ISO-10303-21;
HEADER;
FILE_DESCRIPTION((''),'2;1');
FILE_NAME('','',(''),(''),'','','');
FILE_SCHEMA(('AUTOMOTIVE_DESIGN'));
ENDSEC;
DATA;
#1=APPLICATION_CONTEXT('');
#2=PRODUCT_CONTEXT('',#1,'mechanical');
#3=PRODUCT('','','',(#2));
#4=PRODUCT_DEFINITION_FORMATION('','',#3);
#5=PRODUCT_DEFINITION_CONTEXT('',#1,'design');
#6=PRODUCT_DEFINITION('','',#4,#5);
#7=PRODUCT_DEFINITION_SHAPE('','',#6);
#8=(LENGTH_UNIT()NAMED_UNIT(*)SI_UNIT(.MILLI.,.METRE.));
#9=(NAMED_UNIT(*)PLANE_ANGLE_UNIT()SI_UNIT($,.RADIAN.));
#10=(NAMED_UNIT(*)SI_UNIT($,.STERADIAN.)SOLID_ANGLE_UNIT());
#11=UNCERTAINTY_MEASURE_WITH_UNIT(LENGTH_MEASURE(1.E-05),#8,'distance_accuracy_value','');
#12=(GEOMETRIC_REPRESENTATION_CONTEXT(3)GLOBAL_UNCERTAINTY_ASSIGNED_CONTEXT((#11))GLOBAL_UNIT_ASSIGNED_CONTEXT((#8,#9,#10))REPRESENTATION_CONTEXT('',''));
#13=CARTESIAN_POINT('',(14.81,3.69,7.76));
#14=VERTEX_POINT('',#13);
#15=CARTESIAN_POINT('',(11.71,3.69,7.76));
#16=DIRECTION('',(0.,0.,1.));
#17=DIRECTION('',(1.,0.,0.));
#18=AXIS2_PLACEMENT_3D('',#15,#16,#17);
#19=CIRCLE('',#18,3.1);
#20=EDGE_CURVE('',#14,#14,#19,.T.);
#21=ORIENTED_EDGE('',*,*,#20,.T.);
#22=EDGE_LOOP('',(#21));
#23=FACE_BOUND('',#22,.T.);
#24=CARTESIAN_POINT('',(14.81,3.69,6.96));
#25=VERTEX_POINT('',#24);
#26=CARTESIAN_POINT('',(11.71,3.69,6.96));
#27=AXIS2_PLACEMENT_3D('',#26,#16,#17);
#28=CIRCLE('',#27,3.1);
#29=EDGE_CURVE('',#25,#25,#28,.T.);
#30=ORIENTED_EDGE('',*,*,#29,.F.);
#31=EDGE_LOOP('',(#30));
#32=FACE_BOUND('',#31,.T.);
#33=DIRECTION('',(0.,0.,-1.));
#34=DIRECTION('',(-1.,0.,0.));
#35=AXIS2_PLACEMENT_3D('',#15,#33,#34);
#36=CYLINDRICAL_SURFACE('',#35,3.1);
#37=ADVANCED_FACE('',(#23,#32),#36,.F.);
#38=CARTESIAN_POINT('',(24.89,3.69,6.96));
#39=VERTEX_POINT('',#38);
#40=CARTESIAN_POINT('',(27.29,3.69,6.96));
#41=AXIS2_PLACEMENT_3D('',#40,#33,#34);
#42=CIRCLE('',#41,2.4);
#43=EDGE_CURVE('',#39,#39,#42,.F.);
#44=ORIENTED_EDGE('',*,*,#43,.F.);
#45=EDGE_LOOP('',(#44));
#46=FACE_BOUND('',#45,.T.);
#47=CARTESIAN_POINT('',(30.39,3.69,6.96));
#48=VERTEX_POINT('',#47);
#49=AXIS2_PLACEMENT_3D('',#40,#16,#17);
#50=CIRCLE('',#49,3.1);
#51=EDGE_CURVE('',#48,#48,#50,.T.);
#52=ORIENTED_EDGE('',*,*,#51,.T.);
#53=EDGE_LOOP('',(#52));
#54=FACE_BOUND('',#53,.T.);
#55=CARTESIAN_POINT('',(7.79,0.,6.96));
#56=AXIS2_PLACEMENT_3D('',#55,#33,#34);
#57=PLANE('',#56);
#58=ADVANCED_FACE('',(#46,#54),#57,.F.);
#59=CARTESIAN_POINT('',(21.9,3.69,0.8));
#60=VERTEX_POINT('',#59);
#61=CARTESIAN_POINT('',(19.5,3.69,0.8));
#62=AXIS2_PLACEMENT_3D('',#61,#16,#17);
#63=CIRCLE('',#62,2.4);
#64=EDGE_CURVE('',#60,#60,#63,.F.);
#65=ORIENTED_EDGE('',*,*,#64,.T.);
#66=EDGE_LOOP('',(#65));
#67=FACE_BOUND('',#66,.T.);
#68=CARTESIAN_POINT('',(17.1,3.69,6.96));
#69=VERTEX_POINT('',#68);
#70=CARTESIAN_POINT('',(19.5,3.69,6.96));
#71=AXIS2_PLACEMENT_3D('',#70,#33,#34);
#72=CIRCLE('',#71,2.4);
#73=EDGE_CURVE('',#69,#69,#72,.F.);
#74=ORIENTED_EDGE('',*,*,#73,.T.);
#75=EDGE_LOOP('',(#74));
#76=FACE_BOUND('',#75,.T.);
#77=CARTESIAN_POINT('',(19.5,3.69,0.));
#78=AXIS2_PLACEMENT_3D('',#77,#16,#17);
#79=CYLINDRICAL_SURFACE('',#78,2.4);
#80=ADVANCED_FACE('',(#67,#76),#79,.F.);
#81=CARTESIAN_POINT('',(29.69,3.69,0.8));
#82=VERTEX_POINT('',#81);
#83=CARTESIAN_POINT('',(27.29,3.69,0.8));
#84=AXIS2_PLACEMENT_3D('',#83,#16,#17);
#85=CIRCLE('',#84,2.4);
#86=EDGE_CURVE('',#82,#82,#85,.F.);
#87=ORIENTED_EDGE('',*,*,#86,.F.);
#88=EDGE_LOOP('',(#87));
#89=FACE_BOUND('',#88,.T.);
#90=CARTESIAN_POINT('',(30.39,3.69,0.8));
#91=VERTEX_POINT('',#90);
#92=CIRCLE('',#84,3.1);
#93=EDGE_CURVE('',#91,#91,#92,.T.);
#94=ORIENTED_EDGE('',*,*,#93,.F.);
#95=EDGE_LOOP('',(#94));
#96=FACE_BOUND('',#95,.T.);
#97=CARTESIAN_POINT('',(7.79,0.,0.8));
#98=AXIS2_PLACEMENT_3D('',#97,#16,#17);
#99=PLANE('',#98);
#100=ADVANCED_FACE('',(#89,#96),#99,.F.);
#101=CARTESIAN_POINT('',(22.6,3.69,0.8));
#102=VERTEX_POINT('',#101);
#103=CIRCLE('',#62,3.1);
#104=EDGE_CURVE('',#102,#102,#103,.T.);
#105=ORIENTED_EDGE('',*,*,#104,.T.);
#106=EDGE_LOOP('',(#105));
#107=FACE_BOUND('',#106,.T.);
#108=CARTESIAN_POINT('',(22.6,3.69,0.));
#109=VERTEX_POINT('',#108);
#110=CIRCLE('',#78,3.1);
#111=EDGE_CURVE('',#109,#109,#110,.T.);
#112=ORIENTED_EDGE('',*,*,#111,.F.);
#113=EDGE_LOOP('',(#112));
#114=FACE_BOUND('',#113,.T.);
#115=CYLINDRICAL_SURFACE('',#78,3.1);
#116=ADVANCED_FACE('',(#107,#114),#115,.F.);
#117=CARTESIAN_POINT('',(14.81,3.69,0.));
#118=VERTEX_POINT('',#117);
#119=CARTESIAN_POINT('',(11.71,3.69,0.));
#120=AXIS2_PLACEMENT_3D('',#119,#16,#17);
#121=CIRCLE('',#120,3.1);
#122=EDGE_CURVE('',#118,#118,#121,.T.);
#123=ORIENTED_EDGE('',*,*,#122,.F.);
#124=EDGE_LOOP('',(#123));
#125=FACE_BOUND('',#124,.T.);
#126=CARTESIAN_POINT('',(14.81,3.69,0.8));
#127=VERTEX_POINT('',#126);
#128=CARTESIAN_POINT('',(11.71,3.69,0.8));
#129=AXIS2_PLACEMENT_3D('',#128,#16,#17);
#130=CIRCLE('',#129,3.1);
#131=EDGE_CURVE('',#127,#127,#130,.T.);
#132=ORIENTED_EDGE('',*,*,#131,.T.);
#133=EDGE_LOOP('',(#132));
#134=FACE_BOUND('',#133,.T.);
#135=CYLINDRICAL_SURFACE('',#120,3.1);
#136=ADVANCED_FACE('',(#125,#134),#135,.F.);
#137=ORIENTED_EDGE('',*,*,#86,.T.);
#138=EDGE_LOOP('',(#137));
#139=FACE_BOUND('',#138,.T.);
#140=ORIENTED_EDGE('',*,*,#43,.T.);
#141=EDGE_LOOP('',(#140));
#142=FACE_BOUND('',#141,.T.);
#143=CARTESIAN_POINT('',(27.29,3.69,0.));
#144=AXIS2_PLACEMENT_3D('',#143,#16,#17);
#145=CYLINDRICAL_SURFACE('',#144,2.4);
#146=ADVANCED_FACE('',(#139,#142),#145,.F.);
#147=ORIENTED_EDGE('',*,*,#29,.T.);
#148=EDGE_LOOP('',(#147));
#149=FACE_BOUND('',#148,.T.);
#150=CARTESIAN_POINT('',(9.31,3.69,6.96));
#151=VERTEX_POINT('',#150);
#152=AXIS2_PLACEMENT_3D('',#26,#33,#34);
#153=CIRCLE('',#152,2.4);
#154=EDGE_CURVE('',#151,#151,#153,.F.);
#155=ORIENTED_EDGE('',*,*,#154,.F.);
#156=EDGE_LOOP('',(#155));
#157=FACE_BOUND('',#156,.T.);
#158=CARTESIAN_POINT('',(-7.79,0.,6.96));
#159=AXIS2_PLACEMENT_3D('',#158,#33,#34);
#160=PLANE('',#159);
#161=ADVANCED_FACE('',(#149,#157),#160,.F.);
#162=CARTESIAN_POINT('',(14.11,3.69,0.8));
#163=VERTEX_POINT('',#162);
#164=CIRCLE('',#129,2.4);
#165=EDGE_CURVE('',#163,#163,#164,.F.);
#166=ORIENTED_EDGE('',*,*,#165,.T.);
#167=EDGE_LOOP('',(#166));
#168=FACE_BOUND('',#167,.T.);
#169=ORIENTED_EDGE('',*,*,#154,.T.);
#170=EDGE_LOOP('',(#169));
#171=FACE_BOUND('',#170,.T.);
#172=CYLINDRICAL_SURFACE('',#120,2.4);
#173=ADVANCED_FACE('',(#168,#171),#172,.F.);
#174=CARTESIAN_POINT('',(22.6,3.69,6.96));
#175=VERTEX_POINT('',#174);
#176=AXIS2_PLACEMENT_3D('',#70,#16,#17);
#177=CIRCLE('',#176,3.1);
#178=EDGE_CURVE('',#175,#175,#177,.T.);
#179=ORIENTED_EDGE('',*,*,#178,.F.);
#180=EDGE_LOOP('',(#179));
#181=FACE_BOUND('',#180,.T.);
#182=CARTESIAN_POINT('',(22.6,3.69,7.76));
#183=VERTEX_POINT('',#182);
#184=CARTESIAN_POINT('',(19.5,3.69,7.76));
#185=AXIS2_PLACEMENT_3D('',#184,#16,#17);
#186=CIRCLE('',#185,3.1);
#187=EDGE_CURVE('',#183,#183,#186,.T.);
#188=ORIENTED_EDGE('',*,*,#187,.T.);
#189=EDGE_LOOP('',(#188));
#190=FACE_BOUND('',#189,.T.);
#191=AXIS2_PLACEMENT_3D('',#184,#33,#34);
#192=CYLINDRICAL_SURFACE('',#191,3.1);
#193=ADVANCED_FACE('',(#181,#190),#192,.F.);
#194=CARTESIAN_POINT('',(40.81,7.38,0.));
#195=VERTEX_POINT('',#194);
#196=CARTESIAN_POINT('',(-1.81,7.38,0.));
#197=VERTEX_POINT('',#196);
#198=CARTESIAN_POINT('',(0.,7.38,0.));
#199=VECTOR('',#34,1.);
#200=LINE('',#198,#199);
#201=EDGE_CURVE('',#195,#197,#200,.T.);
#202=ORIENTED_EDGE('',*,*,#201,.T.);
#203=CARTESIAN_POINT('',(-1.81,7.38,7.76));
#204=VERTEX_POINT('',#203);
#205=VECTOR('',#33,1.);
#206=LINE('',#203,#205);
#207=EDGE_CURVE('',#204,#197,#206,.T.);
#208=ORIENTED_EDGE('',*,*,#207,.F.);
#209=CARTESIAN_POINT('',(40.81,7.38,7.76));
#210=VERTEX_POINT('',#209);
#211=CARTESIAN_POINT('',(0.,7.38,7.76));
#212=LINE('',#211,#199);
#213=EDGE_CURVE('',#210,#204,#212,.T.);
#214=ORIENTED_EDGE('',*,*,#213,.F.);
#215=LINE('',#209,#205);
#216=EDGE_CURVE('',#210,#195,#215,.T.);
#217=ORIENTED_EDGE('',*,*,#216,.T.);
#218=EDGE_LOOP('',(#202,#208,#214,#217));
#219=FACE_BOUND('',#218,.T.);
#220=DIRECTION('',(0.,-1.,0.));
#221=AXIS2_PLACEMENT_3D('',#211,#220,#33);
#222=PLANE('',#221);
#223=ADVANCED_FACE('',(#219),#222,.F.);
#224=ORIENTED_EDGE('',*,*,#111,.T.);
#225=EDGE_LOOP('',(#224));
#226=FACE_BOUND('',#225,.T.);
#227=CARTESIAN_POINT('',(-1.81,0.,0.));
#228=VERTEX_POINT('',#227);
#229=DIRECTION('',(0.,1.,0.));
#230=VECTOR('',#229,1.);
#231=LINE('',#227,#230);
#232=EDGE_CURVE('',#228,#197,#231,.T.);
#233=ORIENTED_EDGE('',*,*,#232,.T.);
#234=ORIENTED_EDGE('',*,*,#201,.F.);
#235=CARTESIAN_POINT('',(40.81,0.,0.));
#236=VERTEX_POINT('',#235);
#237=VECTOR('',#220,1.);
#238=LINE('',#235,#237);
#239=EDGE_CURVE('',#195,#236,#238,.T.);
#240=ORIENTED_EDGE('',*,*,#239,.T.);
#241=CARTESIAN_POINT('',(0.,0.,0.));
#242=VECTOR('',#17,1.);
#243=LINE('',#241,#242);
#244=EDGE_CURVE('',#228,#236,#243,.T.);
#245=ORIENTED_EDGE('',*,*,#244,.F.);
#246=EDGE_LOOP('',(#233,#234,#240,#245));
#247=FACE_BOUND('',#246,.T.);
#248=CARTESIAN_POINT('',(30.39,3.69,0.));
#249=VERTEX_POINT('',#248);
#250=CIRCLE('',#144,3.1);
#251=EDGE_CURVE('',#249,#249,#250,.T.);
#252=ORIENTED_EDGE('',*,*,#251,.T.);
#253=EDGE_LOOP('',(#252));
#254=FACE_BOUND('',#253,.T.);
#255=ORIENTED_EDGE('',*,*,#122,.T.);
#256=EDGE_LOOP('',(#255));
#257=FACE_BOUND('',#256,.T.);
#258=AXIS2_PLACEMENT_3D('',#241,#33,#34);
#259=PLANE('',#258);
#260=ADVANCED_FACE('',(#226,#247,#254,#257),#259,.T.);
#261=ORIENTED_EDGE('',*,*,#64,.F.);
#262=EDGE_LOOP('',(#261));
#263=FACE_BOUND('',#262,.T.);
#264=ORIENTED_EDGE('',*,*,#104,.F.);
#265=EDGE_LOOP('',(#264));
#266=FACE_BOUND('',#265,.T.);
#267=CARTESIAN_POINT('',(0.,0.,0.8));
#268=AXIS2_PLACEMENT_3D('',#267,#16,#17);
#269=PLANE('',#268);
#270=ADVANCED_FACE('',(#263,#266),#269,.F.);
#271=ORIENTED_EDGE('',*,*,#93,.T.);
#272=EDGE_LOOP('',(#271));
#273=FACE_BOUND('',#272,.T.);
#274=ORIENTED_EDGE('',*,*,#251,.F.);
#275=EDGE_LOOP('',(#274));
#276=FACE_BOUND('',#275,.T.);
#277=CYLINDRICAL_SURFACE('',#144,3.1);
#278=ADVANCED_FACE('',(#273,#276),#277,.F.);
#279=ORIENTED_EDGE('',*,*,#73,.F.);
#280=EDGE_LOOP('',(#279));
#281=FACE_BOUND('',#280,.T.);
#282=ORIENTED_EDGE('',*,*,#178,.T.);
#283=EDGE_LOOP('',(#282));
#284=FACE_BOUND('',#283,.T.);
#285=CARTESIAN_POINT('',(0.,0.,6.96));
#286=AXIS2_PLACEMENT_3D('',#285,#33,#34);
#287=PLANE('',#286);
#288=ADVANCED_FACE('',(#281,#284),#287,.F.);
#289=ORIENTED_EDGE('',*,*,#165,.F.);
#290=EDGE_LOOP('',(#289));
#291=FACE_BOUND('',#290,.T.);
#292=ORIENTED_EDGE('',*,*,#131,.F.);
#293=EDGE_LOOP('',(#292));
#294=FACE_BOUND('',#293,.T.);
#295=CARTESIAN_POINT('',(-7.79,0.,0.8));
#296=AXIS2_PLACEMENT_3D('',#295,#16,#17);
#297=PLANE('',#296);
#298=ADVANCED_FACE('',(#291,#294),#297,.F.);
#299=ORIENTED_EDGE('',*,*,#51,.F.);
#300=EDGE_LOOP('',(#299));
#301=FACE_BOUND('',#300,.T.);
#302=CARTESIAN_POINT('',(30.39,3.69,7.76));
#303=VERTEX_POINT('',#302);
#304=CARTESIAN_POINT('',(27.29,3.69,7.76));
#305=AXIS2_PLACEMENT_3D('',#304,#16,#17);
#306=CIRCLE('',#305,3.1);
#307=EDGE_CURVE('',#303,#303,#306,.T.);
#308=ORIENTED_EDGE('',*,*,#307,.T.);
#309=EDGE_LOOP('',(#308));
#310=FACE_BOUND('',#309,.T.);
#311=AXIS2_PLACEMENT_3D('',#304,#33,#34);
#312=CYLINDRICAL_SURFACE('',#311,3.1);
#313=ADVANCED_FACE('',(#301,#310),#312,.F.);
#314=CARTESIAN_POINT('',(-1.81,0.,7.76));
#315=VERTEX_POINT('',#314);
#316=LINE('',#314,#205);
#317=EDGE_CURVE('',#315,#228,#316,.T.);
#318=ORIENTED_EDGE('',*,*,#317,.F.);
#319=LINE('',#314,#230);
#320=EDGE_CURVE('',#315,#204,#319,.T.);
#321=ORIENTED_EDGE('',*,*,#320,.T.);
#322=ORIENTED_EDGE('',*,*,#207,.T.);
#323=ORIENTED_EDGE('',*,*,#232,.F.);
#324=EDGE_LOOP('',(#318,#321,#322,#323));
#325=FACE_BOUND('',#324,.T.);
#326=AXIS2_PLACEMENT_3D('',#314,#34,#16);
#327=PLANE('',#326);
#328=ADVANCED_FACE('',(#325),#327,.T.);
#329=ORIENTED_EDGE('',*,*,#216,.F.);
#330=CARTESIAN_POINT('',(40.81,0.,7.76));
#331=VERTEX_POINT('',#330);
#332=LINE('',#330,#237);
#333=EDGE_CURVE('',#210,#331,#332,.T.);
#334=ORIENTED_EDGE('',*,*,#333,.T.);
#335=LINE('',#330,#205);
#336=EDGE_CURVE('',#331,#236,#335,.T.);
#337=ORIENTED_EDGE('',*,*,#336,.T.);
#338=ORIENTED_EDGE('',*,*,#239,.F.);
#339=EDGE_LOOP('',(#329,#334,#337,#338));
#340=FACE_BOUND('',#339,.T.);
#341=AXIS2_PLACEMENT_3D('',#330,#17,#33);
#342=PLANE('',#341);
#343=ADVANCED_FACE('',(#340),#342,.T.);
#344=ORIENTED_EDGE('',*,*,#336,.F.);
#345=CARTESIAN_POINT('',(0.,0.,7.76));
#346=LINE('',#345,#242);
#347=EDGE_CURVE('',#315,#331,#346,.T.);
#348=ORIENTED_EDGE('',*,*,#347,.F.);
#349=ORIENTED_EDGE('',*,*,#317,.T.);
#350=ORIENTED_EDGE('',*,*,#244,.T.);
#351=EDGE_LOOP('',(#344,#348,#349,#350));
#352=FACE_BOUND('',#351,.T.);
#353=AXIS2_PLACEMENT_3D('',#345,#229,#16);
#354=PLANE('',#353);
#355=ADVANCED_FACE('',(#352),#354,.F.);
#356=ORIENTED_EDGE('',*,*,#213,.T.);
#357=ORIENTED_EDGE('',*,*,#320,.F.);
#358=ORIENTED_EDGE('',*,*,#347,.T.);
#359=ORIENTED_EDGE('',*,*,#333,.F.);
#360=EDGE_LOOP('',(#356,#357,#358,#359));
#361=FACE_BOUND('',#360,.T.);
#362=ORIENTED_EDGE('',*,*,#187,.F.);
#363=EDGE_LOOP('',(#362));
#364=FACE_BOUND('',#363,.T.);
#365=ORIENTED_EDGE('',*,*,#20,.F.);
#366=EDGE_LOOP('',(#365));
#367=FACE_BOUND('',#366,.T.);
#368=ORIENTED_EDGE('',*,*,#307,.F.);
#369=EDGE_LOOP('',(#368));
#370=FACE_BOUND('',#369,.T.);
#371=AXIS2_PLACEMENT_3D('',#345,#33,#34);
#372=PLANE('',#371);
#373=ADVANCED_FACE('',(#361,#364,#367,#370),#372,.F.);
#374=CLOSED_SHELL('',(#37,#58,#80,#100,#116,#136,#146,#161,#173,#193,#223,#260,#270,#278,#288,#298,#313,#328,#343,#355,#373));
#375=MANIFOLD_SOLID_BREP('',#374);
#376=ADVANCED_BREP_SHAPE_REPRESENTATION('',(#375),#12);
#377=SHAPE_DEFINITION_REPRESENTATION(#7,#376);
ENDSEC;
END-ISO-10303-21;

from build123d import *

# Parameters (mm, degrees)
SKETCH1_W                = 39
SKETCH1_H                = 7.38
BOSS_EXTRUDE1_DEPTH      = 7.76
SKETCH2_R                = 2.4
CUT_EXTRUDE1_DEPTH       = 7.76
CUT_EXTRUDE2_OUTLINE_R   = 3.1
CUT_EXTRUDE2_OUTLINE_R_2 = 2.4
CUT_EXTRUDE2_DEPTH       = 0.8
CUT_EXTRUDE3_START       = 6.96
CUT_EXTRUDE3_OUTLINE_R   = 3.1
CUT_EXTRUDE3_OUTLINE_R_2 = 2.4
CUT_EXTRUDE3_DEPTH       = 0.8
LPATTERN3_COUNT          = 3
LPATTERN3_PITCH          = 7.79
LPATTERN6_COUNT          = 3
LPATTERN6_PITCH          = 7.79
FILLET1_R                = 3.69
FILLET2_R                = 3.69
FILLET3_R                = 3.69
FILLET4_R                = 3.69
BOSS_EXTRUDE2_START      = -7.76
SKETCH3_R                = 3.1
BOSS_EXTRUDE2_DEPTH      = 7.76
SKETCH4_R                = 3.1
BOSS_EXTRUDE3_DEPTH      = 7.76
SKETCH5_W                = 5.5
SKETCH5_H                = 7.38
BOSS_EXTRUDE5_DEPTH      = 7.76


# Read off the part's stored shape, not the designer's step: Cut-Extrude2, Cut-Extrude3
with BuildPart() as part:
    # Sketch1 → Boss-Extrude1 (new body)
    with BuildSketch(Plane.XY):
        with Locations((19.5, 3.69)):
            Rectangle(SKETCH1_W, SKETCH1_H)
    extrude(amount=BOSS_EXTRUDE1_DEPTH)

    # Sketch2 → Cut-Extrude1 (cut)
    with BuildSketch(Plane.XY.offset(7.76)):
        with Locations((19.5, 3.69)):
            Circle(SKETCH2_R)
    cut_extrude1 = extrude(amount=-CUT_EXTRUDE1_DEPTH, mode=Mode.SUBTRACT)

    # Cut-Extrude2 outline → Cut-Extrude2 (cut)
    with BuildSketch(Plane.XY):
        with Locations((19.5, 3.69)):
            Circle(CUT_EXTRUDE2_OUTLINE_R)
        with Locations((19.5, 3.69)):
            Circle(CUT_EXTRUDE2_OUTLINE_R_2, mode=Mode.SUBTRACT)
    cut_extrude2 = extrude(amount=CUT_EXTRUDE2_DEPTH, mode=Mode.SUBTRACT)

    # Cut-Extrude3 outline → Cut-Extrude3 (cut)
    with BuildSketch(Plane.XY.offset(CUT_EXTRUDE3_START)):
        with Locations((19.5, 3.69)):
            Circle(CUT_EXTRUDE3_OUTLINE_R)
        with Locations((19.5, 3.69)):
            Circle(CUT_EXTRUDE3_OUTLINE_R_2, mode=Mode.SUBTRACT)
    cut_extrude3 = extrude(amount=CUT_EXTRUDE3_DEPTH, mode=Mode.SUBTRACT)

    # LPattern3: Cut-Extrude1, Cut-Extrude2, Cut-Extrude3 ×3
    with Locations(*[(-i * LPATTERN3_PITCH, 0, 0) for i in range(1, LPATTERN3_COUNT)]):
        add(cut_extrude1, mode=Mode.SUBTRACT)
        add(cut_extrude2, mode=Mode.SUBTRACT)
        add(cut_extrude3, mode=Mode.SUBTRACT)

    # LPattern6: Cut-Extrude1, Cut-Extrude2, Cut-Extrude3 ×3
    with Locations(*[(i * LPATTERN6_PITCH, 0, 0) for i in range(1, LPATTERN6_COUNT)]):
        add(cut_extrude1, mode=Mode.SUBTRACT)
        add(cut_extrude2, mode=Mode.SUBTRACT)
        add(cut_extrude3, mode=Mode.SUBTRACT)

    # Fillet1
    fillet1_edges = [part.edges().sort_by_distance(p)[0] for p in [
        (0, 7.38, 3.88),
    ]]
    fillet(fillet1_edges, radius=FILLET1_R)

    # Fillet2
    fillet2_edges = [part.edges().sort_by_distance(p)[0] for p in [
        (0, 0, 3.88),
    ]]
    fillet(fillet2_edges, radius=FILLET2_R - 0.0001)  # a hair under: the kernel refuses the full size

    # Fillet3
    fillet3_edges = [part.edges().sort_by_distance(p)[0] for p in [
        (39, 7.38, 3.88),
    ]]
    fillet(fillet3_edges, radius=FILLET3_R)

    # Fillet4
    fillet4_edges = [part.edges().sort_by_distance(p)[0] for p in [
        (39, 0, 3.88),
    ]]
    fillet(fillet4_edges, radius=FILLET4_R - 0.0001)  # a hair under: the kernel refuses the full size

    # Sketch3 → Boss-Extrude2 (add)
    with BuildSketch(Plane.XY.offset(7.76).offset(BOSS_EXTRUDE2_START)):
        with Locations((3.92, 3.69)):
            Circle(SKETCH3_R)
    extrude(amount=BOSS_EXTRUDE2_DEPTH)

    # Sketch4 → Boss-Extrude3 (add)
    with BuildSketch(Plane(origin=(0, 0, 0), x_dir=(-1, 0, 0), z_dir=(0, 0, -1))):
        with Locations((-35.08, 3.69)):
            Circle(SKETCH4_R)
    extrude(amount=-BOSS_EXTRUDE3_DEPTH)

    # Sketch5 → Boss-Extrude5 (add)
    with BuildSketch(Plane(origin=(0, 0, 0), x_dir=(-1, 0, 0), z_dir=(0, 0, -1))):
        with Locations((-38.06, 3.69)):
            Rectangle(SKETCH5_W, SKETCH5_H)
        with Locations((-0.94, 3.69)):
            Rectangle(SKETCH5_W, SKETCH5_H)
    extrude(amount=-BOSS_EXTRUDE5_DEPTH)


solid = part.part
